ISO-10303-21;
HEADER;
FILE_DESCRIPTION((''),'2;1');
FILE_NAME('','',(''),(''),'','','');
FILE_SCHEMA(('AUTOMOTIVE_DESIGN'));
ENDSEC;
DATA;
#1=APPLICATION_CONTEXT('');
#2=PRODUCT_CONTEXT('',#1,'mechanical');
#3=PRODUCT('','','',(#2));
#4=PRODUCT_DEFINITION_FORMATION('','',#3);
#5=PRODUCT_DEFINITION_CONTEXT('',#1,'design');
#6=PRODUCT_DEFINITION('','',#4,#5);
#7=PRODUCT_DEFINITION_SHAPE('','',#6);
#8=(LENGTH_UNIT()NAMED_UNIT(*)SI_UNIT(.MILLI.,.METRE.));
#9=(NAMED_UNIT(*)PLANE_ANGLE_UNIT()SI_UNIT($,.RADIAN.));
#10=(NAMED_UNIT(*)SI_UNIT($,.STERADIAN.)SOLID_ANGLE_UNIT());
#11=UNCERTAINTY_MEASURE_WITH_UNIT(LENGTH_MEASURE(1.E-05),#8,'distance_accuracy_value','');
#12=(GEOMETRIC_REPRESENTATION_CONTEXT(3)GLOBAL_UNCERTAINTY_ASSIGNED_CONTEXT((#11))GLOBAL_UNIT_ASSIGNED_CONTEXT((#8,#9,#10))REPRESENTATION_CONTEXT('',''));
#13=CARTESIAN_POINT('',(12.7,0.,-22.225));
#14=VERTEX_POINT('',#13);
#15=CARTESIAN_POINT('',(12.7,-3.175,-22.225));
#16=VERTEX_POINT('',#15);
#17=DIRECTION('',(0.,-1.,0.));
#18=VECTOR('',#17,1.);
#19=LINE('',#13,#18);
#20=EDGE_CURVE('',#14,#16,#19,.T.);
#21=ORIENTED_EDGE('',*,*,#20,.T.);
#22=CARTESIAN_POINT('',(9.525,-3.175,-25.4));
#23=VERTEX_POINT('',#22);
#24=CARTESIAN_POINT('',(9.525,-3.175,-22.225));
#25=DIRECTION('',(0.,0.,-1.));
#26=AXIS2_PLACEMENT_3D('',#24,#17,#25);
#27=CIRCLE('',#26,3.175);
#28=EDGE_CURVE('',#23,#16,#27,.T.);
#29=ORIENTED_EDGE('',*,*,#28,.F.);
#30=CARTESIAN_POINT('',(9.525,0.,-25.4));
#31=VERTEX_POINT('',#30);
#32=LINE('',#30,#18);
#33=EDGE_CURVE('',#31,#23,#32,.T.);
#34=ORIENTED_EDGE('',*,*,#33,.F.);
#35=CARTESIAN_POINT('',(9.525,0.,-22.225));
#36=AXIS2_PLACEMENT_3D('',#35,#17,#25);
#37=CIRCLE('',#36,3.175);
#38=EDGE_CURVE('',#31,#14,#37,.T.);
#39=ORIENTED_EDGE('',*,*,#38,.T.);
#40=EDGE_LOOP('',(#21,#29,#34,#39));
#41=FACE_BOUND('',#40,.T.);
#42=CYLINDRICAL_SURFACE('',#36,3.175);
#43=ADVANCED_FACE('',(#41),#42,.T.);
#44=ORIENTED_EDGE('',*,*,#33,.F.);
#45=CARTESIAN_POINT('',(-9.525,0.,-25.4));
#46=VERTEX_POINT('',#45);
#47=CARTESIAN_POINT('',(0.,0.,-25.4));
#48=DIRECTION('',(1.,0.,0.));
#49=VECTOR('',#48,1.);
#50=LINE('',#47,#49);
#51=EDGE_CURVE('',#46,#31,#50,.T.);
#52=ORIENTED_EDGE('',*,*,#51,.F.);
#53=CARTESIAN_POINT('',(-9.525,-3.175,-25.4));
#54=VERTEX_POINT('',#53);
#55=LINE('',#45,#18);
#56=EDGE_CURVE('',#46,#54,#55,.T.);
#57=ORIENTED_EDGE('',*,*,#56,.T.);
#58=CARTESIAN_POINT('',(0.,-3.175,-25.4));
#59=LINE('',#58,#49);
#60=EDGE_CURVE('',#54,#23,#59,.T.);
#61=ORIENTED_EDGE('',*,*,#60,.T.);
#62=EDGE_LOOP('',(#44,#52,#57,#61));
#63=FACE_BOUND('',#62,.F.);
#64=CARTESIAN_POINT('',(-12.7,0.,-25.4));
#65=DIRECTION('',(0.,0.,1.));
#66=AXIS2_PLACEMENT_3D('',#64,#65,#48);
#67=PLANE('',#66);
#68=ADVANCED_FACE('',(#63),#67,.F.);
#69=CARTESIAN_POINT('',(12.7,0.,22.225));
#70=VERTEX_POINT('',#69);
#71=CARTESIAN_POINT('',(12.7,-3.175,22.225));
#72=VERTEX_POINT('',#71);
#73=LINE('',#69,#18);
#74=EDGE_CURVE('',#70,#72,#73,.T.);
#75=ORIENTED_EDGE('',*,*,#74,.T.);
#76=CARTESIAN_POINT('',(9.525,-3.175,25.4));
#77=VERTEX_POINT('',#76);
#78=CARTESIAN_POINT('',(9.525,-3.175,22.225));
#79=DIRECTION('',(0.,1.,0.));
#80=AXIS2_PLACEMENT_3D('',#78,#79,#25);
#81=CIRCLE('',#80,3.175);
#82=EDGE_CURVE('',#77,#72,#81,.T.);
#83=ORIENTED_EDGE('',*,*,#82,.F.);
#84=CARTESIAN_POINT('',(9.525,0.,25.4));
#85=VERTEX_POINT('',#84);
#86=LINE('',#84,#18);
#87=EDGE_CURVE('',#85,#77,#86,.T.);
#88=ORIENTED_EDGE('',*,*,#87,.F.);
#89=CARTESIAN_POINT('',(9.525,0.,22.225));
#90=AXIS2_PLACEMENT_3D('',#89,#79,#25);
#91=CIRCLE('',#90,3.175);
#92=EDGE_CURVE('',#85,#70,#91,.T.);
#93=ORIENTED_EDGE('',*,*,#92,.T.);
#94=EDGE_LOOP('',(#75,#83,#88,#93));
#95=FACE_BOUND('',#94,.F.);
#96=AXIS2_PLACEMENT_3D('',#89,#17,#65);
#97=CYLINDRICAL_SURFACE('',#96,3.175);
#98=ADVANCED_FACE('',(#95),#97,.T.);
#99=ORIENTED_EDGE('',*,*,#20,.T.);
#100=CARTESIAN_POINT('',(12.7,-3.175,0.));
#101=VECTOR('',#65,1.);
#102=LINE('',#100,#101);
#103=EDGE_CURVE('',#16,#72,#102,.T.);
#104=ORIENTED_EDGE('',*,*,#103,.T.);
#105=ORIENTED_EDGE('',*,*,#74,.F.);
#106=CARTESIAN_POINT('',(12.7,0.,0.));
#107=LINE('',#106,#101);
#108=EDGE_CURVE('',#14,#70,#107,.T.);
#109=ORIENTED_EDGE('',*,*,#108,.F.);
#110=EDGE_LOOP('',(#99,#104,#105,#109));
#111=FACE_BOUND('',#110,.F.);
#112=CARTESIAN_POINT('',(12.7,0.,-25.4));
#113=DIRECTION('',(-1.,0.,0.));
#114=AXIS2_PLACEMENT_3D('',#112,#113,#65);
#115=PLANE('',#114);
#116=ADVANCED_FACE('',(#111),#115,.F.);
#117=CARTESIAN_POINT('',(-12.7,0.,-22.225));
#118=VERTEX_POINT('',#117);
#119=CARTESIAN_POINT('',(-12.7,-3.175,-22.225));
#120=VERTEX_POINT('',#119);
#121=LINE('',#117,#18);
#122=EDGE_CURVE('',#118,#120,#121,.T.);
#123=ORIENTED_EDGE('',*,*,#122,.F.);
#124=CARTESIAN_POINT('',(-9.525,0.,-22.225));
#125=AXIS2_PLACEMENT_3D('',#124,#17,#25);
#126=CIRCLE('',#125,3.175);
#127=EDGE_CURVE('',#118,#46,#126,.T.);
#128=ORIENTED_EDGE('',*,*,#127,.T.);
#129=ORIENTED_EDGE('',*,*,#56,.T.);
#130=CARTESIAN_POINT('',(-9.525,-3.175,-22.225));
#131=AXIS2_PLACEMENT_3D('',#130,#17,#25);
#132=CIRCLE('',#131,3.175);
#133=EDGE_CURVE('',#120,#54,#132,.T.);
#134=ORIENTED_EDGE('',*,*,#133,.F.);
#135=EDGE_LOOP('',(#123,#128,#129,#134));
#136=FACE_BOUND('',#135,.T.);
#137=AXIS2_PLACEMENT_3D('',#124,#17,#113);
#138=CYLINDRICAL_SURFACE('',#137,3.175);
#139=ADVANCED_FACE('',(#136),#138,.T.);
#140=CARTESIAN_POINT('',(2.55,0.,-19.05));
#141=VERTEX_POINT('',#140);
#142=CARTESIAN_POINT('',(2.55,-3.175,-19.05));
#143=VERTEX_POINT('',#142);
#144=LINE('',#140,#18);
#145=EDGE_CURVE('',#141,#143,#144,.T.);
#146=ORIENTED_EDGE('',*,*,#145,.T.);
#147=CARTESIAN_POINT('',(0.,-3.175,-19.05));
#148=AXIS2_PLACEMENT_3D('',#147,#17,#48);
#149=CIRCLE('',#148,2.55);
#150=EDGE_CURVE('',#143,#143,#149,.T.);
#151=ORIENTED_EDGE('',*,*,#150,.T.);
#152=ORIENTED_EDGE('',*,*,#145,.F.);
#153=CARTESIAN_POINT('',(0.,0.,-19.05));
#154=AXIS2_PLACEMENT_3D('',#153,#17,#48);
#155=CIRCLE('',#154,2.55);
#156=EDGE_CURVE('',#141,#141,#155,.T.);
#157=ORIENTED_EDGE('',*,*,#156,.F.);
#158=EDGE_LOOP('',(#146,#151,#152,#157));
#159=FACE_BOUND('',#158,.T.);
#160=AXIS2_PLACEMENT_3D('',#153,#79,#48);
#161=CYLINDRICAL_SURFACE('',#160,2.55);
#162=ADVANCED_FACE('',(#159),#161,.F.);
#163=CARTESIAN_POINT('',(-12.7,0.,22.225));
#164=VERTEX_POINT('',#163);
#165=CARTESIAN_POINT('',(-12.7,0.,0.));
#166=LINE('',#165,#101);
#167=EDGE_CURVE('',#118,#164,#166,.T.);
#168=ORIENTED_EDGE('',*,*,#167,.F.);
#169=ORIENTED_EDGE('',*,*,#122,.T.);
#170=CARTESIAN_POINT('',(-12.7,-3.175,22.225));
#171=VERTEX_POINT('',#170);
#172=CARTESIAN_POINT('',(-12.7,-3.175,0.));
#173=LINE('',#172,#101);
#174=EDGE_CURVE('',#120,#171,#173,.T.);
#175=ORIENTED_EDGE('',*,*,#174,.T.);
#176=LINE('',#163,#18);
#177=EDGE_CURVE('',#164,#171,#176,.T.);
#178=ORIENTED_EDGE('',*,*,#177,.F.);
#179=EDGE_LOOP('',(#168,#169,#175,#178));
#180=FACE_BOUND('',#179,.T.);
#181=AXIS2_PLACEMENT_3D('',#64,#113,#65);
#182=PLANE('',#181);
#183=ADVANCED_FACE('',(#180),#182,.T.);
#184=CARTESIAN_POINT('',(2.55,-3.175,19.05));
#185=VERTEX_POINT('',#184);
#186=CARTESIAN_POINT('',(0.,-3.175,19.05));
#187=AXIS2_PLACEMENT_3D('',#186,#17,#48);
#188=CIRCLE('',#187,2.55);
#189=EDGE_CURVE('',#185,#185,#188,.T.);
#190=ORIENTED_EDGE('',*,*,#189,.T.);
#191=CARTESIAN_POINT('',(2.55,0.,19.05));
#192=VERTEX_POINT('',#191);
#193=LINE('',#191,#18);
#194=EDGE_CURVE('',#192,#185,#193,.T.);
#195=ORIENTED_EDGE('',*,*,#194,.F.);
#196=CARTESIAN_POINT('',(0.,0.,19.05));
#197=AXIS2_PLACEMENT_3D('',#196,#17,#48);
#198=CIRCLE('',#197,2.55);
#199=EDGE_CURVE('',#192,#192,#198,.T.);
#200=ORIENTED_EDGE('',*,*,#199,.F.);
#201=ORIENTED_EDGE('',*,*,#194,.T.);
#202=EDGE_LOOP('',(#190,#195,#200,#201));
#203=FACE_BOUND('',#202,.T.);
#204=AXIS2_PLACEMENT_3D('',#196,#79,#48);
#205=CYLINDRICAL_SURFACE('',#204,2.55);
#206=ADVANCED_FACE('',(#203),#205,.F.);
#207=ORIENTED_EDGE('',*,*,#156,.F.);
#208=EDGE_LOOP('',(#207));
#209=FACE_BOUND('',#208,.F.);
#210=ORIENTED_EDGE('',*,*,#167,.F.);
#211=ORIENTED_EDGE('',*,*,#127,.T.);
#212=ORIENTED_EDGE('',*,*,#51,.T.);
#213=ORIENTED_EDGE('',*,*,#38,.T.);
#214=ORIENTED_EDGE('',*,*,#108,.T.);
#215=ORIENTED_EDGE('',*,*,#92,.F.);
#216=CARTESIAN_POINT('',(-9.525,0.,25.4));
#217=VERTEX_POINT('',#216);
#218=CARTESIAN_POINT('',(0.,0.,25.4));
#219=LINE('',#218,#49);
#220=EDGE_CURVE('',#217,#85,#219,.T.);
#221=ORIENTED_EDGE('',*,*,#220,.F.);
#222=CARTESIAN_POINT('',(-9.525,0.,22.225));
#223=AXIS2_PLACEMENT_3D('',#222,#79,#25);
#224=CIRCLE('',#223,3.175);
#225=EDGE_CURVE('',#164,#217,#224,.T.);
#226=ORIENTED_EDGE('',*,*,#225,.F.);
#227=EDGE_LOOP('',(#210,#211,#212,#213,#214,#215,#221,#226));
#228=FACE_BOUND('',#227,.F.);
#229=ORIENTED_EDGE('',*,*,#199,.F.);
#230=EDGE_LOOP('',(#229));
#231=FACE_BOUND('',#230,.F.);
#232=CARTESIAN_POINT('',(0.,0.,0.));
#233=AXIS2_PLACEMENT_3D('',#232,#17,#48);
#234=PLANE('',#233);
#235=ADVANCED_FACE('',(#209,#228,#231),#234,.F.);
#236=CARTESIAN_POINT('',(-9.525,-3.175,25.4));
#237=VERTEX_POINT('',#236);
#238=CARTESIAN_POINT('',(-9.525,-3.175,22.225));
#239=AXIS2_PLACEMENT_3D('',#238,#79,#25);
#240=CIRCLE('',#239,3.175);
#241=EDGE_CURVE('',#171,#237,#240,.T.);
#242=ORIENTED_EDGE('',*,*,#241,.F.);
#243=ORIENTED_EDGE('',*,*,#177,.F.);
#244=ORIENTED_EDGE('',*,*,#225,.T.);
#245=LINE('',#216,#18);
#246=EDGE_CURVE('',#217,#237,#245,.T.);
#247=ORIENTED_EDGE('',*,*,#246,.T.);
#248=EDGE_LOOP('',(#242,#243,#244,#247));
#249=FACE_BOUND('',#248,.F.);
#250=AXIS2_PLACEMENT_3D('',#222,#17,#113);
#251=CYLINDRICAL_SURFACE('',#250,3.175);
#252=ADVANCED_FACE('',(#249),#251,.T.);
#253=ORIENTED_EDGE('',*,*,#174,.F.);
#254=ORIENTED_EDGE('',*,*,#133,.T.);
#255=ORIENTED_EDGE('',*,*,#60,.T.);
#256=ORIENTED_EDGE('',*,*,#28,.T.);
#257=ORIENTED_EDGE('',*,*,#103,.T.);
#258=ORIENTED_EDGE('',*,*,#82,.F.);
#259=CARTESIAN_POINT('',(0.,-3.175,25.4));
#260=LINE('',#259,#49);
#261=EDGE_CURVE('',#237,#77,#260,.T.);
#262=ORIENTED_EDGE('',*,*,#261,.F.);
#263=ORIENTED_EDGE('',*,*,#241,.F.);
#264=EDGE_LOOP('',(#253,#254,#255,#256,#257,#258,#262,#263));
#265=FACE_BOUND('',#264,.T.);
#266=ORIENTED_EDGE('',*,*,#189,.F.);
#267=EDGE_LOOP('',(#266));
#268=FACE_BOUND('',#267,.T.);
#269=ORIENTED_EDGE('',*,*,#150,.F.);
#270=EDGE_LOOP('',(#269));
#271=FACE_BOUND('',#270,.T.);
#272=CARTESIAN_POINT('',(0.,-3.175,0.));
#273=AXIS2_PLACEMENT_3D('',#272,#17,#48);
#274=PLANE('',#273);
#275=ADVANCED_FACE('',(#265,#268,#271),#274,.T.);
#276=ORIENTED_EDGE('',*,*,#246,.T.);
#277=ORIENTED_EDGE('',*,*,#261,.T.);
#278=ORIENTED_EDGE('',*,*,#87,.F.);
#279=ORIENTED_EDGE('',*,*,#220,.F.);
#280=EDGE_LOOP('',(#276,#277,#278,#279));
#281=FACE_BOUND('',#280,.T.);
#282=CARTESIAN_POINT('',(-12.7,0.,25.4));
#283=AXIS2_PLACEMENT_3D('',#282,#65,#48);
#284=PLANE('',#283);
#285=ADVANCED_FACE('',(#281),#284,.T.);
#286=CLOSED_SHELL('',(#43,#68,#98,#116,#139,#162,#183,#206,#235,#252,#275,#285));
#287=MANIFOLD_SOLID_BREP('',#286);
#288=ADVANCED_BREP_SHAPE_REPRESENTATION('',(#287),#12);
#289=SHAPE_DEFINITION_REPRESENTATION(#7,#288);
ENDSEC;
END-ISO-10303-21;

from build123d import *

# Parameters (mm, degrees)
F1_W     = 25.4
F1_H     = 50.8
F1_R     = 2.55
F2_DEPTH = 3.175
F3_R     = 3.175


# Not quite as in the source:
# - a variable given as a bare number and used for a length is read in inches; the dataset says mm whatever the document's units were


with BuildPart() as f2:
    # F1 (on Front) → F2 (new body)
    with BuildSketch(Plane.XZ):
        Rectangle(F1_W, F1_H)
        with Locations((0, -19.05)):
            Circle(F1_R, mode=Mode.SUBTRACT)
        with Locations((0, 19.05)):
            Circle(F1_R, mode=Mode.SUBTRACT)
    extrude(amount=F2_DEPTH)

    # F3
    f3_edges = [f2.edges().sort_by_distance(p)[0] for p in [
        (-12.7, -1.5875, 25.4),
        (12.7, -1.5875, 25.4),
        (12.7, -1.5875, -25.4),
        (-12.7, -1.5875, -25.4),
    ]]
    fillet(f3_edges, radius=F3_R)


solid = f2.part
